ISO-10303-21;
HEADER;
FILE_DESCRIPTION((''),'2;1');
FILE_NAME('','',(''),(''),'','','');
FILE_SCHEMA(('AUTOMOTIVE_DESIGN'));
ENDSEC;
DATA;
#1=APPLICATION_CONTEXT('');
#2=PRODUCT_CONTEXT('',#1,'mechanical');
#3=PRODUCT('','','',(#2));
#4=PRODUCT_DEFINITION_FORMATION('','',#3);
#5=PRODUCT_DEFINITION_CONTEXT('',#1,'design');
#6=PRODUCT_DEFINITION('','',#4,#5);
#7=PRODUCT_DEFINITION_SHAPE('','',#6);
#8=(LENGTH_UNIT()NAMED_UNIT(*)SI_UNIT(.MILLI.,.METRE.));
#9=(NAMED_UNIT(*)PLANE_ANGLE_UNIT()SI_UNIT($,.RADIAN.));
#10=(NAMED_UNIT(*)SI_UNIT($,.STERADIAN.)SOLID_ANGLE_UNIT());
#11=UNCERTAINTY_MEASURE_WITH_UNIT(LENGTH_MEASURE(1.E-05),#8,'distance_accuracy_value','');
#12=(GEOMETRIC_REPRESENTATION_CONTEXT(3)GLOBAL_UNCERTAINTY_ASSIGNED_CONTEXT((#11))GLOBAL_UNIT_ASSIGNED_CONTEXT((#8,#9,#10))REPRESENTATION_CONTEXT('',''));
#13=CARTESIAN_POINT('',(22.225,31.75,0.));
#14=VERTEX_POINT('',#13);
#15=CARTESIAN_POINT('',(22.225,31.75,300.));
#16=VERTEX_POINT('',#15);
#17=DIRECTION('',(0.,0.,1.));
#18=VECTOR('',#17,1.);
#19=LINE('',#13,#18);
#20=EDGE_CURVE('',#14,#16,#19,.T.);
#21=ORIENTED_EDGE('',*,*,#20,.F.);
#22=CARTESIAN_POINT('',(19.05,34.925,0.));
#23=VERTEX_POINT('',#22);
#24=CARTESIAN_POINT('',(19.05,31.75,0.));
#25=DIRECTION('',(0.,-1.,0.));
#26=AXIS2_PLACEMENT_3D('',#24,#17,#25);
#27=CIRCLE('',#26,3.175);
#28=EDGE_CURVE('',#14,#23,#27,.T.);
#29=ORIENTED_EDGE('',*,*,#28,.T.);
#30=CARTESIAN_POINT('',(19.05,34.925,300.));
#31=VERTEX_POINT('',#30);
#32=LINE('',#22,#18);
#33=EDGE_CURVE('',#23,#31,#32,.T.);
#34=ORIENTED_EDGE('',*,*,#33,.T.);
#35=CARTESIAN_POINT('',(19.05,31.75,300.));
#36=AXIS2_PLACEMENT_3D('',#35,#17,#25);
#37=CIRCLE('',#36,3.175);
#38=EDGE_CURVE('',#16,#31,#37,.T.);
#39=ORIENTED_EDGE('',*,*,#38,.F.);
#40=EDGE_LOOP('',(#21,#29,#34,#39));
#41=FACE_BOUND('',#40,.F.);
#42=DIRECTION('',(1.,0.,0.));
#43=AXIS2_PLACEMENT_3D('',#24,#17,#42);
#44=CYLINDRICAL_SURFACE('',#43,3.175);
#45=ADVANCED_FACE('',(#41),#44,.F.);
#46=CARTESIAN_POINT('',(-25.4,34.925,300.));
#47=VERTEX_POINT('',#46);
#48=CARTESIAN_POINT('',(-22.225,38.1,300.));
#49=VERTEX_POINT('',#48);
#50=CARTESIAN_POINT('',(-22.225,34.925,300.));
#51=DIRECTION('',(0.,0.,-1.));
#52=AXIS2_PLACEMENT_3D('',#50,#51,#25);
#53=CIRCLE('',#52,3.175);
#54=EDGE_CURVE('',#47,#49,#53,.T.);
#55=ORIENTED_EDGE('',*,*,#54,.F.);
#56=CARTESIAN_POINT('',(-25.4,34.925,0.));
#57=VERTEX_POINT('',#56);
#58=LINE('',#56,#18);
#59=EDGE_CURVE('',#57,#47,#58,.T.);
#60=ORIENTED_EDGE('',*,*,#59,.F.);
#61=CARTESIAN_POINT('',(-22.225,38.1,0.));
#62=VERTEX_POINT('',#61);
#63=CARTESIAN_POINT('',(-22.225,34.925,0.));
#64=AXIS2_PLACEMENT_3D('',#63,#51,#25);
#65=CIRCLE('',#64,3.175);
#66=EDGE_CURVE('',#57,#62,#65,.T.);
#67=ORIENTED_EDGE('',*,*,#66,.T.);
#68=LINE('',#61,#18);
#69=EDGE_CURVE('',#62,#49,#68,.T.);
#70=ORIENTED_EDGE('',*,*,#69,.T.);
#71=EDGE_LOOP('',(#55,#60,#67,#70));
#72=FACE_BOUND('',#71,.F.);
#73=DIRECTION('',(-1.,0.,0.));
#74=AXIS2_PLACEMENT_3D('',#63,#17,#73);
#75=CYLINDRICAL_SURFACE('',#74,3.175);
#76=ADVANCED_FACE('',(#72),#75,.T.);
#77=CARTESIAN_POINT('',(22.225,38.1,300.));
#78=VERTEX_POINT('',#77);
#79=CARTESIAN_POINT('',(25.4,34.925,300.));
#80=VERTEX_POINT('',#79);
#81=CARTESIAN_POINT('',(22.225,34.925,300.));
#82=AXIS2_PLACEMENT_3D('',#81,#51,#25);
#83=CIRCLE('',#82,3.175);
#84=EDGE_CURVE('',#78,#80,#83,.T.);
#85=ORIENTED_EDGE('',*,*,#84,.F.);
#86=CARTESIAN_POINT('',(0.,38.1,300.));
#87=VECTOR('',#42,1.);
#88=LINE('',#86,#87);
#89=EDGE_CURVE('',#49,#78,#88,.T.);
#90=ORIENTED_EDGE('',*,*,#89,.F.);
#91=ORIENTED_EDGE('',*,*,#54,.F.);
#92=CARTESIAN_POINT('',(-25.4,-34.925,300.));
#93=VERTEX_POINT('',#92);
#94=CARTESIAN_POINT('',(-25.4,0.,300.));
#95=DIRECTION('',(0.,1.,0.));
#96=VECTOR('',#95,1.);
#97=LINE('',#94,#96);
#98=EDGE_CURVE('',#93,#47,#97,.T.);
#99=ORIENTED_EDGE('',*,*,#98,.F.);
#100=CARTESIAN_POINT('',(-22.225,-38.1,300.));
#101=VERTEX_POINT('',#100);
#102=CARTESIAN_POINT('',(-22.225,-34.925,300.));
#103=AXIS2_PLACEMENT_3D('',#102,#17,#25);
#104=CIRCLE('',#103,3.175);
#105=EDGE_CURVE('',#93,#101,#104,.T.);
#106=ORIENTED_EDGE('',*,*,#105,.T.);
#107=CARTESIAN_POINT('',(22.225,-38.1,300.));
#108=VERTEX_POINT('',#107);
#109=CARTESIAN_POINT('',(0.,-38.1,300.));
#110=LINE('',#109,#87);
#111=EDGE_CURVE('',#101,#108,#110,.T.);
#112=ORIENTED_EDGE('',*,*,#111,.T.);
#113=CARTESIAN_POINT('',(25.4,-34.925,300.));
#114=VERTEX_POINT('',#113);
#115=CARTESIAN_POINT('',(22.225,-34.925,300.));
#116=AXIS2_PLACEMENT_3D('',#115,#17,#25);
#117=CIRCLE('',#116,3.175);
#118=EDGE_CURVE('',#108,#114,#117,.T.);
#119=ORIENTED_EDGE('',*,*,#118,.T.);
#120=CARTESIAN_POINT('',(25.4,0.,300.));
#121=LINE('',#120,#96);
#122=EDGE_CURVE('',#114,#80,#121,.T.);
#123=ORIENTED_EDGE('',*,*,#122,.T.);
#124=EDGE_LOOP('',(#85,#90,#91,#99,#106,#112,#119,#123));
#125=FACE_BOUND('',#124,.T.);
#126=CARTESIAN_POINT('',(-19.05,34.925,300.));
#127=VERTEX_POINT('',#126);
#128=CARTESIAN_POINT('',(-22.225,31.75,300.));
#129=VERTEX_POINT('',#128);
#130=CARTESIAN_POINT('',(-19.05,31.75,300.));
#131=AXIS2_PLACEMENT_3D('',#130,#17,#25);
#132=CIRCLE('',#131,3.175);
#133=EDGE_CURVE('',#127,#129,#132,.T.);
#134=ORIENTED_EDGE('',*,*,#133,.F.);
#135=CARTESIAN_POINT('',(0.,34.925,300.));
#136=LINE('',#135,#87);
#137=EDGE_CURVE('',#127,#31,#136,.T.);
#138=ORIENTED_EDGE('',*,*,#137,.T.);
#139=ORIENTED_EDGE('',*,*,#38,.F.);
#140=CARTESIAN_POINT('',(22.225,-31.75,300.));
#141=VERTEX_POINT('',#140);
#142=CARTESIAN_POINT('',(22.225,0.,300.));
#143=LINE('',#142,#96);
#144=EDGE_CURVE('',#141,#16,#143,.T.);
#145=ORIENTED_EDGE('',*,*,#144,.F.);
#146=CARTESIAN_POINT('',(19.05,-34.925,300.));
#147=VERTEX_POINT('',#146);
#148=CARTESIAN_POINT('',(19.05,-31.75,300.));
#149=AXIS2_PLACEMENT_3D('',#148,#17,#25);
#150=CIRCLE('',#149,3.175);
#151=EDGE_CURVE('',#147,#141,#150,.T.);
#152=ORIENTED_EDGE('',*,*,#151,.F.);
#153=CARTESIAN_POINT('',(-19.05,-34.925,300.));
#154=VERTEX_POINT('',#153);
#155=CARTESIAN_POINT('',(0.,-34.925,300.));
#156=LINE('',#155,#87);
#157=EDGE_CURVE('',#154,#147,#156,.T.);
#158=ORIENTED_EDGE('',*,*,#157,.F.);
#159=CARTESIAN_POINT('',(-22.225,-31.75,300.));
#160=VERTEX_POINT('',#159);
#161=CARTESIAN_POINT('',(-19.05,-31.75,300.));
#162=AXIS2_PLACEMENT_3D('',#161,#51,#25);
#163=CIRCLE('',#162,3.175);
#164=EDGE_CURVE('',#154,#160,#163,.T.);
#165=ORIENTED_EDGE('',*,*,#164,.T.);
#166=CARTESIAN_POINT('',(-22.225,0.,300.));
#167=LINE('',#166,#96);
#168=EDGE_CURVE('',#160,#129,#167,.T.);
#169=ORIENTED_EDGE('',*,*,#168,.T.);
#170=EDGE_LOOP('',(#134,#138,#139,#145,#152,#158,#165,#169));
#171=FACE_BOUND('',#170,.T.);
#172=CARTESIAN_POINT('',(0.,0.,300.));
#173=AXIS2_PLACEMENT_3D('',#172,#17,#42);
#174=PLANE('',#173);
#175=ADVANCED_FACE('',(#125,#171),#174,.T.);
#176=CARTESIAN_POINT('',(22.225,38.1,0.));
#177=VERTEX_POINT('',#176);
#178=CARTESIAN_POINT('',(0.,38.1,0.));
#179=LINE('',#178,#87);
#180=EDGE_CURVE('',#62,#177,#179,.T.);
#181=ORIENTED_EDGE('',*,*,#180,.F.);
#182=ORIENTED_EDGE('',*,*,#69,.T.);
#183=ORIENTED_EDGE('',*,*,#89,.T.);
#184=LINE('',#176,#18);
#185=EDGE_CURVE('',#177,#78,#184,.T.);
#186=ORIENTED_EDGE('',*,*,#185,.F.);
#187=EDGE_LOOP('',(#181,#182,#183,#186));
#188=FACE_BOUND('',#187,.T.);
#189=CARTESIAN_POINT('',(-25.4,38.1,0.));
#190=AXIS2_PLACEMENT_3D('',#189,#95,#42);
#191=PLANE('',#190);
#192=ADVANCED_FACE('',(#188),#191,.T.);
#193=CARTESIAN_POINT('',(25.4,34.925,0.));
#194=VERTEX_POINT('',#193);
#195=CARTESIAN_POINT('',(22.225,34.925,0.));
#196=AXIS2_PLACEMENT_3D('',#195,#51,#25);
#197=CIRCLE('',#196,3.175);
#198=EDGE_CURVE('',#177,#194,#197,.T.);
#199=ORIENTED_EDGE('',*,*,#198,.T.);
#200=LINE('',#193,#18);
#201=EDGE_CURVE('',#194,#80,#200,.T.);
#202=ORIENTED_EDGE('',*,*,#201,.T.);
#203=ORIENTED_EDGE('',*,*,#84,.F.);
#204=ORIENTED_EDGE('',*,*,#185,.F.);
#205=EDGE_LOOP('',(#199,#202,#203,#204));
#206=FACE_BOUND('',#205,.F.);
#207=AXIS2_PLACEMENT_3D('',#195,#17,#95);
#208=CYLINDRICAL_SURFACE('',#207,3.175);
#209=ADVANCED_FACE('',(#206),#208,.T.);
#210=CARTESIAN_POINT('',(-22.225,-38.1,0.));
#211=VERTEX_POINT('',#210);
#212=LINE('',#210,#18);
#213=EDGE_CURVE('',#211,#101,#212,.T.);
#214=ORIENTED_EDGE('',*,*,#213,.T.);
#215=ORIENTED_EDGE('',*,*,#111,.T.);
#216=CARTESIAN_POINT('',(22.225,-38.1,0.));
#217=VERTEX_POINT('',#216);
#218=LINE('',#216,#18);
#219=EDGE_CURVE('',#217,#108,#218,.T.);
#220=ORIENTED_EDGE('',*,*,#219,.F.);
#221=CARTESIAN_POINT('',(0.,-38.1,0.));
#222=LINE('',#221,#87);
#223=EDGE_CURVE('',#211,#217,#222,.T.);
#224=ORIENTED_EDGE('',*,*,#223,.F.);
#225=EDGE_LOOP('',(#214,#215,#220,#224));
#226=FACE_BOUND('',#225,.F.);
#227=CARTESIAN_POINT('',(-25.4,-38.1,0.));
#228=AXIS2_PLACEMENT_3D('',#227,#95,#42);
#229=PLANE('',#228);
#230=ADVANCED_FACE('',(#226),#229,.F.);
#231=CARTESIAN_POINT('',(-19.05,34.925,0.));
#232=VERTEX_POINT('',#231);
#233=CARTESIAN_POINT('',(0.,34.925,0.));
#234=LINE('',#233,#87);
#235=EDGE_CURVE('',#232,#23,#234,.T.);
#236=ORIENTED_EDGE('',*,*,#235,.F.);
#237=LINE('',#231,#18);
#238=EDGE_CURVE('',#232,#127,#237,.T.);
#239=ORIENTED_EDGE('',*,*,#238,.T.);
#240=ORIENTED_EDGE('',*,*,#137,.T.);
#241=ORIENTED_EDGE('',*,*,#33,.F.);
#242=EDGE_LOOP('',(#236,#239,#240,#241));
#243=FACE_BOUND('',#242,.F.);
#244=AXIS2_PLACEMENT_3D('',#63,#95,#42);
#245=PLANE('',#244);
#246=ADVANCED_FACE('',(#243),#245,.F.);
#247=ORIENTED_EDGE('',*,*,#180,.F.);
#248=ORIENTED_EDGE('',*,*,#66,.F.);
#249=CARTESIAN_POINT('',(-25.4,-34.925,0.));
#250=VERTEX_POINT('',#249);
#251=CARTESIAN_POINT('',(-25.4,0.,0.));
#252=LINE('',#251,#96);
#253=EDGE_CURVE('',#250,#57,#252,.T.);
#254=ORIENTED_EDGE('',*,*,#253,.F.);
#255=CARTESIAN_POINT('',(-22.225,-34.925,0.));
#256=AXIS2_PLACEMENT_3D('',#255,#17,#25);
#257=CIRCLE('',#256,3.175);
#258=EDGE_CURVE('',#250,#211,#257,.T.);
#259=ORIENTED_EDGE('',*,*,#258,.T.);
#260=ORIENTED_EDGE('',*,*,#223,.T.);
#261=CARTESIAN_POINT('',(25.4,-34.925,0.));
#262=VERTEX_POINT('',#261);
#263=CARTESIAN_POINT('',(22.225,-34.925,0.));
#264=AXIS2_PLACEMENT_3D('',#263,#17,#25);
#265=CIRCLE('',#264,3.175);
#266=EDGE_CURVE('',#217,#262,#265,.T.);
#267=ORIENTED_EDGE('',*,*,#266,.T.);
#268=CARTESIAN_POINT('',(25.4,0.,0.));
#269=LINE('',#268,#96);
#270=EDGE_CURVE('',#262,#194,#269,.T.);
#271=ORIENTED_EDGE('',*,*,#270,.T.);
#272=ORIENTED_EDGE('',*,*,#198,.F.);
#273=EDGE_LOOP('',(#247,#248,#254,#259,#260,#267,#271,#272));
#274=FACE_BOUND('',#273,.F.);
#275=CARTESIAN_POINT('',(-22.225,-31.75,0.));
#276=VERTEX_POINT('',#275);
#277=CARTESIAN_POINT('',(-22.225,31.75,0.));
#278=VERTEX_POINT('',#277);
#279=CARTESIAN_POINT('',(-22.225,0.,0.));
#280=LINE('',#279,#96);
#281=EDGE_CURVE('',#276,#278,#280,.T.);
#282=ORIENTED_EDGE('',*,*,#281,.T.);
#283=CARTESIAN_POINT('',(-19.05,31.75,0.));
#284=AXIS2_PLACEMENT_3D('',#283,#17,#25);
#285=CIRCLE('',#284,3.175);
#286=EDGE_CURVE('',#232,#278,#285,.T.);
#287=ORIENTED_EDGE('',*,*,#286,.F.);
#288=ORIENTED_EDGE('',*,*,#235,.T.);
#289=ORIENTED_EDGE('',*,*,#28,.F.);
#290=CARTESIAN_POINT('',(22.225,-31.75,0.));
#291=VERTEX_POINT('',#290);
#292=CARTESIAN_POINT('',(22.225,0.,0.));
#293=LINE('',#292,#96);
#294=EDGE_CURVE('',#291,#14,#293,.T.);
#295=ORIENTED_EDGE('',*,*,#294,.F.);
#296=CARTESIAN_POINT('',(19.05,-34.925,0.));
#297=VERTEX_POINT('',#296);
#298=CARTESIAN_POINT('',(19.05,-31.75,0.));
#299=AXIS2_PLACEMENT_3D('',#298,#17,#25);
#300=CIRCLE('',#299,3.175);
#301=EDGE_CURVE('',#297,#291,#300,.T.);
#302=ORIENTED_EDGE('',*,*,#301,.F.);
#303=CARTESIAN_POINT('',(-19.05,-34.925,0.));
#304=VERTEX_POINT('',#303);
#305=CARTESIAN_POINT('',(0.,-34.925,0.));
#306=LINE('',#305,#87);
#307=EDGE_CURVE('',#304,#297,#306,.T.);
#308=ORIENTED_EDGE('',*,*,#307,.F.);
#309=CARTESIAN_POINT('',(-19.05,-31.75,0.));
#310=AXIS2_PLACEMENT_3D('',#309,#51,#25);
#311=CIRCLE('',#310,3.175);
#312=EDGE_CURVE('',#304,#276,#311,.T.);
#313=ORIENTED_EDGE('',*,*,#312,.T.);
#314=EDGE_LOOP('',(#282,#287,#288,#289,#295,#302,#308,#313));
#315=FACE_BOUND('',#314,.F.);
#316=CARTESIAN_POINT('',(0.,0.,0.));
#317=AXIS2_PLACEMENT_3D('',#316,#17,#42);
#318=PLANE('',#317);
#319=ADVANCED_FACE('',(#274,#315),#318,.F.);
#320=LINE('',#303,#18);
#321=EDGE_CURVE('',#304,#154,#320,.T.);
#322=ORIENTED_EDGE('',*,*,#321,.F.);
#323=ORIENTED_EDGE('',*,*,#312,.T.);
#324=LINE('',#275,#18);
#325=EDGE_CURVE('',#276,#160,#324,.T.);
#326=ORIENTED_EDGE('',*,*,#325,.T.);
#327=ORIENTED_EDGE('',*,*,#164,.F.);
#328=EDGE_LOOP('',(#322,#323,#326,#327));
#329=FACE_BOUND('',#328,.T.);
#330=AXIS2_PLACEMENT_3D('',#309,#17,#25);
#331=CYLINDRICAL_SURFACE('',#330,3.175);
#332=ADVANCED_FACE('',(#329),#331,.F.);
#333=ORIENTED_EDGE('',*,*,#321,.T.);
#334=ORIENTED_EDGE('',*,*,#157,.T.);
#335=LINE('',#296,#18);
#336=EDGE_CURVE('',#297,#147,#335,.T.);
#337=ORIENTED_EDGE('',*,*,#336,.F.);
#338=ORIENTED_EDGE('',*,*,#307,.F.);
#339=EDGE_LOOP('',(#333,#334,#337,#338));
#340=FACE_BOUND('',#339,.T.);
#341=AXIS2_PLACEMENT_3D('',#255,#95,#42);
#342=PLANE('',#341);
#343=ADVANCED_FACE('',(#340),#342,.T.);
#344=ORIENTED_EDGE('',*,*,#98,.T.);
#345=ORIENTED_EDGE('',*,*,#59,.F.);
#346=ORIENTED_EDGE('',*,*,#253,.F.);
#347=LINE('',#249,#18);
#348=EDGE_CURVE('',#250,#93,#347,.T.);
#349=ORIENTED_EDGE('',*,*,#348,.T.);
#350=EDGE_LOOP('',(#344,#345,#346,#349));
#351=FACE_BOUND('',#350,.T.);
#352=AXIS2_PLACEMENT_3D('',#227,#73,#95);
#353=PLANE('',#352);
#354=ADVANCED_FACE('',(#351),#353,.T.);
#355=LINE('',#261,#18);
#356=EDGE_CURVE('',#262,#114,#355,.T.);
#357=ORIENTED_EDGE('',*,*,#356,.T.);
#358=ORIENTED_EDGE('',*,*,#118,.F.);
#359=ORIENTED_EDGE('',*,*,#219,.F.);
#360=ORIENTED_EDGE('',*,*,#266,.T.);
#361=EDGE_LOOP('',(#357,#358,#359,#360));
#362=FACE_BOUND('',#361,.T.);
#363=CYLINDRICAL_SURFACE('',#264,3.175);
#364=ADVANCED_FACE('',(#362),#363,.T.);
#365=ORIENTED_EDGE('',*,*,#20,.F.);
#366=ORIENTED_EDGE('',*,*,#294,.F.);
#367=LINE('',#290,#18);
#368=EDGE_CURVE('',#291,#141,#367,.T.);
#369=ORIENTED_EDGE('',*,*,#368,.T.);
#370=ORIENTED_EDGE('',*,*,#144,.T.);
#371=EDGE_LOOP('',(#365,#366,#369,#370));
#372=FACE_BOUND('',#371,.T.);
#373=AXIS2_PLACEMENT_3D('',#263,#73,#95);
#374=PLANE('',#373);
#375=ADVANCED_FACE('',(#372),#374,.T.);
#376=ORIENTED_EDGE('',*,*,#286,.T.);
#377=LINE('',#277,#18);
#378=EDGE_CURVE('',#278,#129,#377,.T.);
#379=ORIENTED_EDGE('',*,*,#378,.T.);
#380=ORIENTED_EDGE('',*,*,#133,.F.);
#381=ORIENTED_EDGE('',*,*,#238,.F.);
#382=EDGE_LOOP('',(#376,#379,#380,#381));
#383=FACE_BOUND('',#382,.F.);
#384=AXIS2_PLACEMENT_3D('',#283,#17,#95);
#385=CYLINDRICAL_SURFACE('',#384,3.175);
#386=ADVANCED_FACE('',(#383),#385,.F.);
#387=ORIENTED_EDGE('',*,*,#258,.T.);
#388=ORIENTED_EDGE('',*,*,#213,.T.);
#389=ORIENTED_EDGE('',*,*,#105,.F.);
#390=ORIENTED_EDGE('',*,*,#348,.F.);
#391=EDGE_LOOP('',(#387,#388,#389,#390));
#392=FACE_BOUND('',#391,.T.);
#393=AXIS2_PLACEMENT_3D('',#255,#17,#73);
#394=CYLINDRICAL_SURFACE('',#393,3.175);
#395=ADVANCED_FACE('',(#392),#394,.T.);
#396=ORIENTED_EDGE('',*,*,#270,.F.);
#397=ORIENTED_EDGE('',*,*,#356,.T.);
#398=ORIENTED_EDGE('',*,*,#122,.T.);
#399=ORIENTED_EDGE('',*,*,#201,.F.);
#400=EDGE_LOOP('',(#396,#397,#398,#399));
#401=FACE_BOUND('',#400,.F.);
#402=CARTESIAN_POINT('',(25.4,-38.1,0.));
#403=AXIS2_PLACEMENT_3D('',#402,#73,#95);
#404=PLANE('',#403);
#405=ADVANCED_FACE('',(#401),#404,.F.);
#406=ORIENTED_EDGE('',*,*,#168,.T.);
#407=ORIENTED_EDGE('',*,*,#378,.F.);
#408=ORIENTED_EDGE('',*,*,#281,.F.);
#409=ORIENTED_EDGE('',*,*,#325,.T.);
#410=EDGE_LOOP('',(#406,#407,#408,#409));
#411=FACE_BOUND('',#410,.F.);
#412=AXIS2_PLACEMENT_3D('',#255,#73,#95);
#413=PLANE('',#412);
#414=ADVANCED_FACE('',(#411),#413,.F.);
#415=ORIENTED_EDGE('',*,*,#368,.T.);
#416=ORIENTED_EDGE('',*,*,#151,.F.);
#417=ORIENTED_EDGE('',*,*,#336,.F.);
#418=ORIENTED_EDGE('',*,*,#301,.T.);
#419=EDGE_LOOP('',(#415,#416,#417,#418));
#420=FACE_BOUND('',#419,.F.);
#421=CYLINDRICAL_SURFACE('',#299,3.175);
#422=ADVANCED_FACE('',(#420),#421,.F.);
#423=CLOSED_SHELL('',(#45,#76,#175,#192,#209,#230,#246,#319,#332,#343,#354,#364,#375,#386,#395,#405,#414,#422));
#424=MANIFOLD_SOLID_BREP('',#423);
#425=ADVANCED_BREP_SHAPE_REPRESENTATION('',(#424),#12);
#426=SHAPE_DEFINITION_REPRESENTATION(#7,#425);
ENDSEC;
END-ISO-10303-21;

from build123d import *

# Parameters (mm, degrees)
F0_W     = 50.8
F0_H     = 76.2
F0_W_2   = 44.45
F0_H_2   = 69.85
F2_DEPTH = 300
F3_R     = 3.175


# Not quite as in the source:
# - a variable given as a bare number and used for a length is read in inches; the dataset says mm whatever the document's units were


with BuildPart() as f2:
    # F0 (on Top) → F2 (new body)
    with BuildSketch(Plane.XY):
        Rectangle(F0_W, F0_H)
        Rectangle(F0_W_2, F0_H_2, mode=Mode.SUBTRACT)
    extrude(amount=F2_DEPTH)

    # F3
    f3_edges = [f2.edges().sort_by_distance(p)[0] for p in [
        (-22.225, 34.925, 150),
        (22.225, 34.925, 150),
        (22.225, -34.925, 150),
        (-22.225, -34.925, 150),
        (25.4, 38.1, 150),
        (-25.4, 38.1, 150),
        (25.4, -38.1, 150),
        (-25.4, -38.1, 150),
    ]]
    fillet(f3_edges, radius=F3_R)


solid = f2.part
